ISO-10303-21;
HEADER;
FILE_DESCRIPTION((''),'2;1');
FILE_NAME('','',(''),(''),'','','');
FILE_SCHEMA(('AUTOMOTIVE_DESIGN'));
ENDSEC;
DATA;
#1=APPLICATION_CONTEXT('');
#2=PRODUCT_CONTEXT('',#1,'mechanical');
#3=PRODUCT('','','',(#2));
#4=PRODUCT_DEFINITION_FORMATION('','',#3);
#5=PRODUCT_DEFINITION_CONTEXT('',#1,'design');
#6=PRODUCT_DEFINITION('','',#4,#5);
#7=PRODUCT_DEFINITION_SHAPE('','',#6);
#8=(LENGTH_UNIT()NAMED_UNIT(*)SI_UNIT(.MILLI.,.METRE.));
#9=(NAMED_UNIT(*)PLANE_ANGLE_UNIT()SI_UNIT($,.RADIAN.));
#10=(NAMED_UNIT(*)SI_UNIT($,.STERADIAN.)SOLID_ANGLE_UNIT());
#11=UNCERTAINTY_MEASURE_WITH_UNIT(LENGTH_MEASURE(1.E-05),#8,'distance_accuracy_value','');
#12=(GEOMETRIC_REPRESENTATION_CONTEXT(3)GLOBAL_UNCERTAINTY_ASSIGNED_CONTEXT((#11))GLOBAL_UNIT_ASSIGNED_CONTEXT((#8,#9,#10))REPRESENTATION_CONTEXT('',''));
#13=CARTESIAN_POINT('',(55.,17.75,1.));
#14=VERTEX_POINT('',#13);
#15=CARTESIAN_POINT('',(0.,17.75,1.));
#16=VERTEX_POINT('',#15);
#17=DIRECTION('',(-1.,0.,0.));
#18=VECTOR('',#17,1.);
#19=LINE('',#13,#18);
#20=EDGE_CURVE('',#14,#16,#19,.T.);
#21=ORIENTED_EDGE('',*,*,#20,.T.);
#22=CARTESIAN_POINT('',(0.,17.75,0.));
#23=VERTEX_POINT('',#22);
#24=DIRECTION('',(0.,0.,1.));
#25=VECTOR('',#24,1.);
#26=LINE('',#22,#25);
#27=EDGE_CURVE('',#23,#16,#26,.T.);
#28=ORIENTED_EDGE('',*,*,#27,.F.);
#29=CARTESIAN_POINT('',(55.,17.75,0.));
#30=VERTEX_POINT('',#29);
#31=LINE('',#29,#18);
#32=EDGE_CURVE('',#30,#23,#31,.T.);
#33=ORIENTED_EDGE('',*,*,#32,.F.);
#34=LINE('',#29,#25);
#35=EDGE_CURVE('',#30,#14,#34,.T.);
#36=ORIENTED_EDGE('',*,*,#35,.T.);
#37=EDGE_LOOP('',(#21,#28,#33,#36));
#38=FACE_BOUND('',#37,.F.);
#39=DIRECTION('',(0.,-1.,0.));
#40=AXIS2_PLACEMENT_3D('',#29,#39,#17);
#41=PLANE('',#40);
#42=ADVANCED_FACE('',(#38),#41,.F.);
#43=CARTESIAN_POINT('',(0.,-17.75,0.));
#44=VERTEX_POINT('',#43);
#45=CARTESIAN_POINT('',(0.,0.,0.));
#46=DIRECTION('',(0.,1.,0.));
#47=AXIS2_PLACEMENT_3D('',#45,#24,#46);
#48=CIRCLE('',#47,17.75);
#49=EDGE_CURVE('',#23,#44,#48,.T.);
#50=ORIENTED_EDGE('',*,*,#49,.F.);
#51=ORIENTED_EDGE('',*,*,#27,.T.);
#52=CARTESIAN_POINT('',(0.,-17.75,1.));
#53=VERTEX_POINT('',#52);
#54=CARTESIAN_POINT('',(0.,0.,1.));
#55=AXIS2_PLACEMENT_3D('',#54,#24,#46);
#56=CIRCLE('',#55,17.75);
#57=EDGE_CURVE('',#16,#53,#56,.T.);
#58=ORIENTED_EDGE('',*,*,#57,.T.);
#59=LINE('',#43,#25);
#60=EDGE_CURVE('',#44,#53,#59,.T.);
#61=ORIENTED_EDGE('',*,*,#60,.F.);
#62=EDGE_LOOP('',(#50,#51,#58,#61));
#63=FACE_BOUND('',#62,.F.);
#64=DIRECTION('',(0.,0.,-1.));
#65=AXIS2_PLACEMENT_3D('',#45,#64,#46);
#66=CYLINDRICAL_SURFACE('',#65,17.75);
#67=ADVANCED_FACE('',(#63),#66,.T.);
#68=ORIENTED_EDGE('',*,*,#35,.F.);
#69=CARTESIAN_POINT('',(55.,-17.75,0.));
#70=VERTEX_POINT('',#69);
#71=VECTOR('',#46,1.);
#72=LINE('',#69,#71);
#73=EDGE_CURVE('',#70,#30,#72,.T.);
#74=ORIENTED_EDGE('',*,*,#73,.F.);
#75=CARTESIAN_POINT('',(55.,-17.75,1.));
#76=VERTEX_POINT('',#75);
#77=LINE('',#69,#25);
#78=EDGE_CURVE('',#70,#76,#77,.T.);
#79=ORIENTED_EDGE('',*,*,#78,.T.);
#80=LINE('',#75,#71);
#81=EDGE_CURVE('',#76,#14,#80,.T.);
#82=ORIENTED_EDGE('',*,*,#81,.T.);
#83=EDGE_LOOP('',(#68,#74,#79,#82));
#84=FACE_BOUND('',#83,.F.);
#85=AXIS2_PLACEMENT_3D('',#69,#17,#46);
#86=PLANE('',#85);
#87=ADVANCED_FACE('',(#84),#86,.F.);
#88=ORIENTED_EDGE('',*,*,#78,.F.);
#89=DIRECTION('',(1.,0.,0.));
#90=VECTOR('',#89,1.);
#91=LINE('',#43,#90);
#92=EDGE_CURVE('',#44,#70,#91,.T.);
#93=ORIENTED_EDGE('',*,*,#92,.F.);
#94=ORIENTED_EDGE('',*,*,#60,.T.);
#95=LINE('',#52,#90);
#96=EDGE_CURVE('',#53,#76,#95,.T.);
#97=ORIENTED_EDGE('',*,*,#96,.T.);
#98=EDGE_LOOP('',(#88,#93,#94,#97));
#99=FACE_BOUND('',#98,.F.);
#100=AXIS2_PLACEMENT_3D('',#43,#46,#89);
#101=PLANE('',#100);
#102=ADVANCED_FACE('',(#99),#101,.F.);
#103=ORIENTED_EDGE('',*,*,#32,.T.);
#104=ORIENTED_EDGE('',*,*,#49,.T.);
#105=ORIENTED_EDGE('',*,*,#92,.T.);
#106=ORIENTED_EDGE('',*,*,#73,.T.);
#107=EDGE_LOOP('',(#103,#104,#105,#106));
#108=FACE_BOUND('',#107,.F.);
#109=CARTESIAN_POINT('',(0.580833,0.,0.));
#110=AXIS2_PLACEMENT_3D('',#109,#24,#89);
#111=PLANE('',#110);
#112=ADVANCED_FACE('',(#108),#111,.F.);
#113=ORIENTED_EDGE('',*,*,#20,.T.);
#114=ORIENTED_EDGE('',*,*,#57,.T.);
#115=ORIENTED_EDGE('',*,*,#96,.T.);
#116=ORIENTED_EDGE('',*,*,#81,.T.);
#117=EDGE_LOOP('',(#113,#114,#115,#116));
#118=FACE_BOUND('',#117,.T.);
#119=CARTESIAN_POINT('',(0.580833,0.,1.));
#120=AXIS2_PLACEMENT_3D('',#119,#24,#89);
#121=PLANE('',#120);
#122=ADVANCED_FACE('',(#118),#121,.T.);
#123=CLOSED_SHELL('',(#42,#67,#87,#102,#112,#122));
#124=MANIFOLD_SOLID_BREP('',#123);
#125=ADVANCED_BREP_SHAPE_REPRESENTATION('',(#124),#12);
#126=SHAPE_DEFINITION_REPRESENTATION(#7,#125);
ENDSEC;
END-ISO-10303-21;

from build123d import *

# Parameters (mm, degrees)
F1_DEPTH = 1


with BuildPart() as f1:
    # F0 (on Top) → F1 (new body)
    with BuildSketch(Plane.XY):
        with BuildLine():
            ThreePointArc((0, -17.75), (12.5511453661, -12.5511453661), (17.75, 0))
            ThreePointArc((17.75, 0), (12.5511453661, 12.5511453661), (0, 17.75))
            ThreePointArc((0, 17.75), (-17.75, 0), (0, -17.75))
        make_face()
        with BuildLine():
            ThreePointArc((0, 17.75), (12.5511453661, 12.5511453661), (17.75, 0))
            ThreePointArc((17.75, 0), (12.5511453661, -12.5511453661), (0, -17.75))
            Line((0, -17.75), (55, -17.75))
            Line((55, -17.75), (55, 17.75))
            Line((55, 17.75), (0, 17.75))
        make_face()
    extrude(amount=F1_DEPTH)


solid = f1.part
